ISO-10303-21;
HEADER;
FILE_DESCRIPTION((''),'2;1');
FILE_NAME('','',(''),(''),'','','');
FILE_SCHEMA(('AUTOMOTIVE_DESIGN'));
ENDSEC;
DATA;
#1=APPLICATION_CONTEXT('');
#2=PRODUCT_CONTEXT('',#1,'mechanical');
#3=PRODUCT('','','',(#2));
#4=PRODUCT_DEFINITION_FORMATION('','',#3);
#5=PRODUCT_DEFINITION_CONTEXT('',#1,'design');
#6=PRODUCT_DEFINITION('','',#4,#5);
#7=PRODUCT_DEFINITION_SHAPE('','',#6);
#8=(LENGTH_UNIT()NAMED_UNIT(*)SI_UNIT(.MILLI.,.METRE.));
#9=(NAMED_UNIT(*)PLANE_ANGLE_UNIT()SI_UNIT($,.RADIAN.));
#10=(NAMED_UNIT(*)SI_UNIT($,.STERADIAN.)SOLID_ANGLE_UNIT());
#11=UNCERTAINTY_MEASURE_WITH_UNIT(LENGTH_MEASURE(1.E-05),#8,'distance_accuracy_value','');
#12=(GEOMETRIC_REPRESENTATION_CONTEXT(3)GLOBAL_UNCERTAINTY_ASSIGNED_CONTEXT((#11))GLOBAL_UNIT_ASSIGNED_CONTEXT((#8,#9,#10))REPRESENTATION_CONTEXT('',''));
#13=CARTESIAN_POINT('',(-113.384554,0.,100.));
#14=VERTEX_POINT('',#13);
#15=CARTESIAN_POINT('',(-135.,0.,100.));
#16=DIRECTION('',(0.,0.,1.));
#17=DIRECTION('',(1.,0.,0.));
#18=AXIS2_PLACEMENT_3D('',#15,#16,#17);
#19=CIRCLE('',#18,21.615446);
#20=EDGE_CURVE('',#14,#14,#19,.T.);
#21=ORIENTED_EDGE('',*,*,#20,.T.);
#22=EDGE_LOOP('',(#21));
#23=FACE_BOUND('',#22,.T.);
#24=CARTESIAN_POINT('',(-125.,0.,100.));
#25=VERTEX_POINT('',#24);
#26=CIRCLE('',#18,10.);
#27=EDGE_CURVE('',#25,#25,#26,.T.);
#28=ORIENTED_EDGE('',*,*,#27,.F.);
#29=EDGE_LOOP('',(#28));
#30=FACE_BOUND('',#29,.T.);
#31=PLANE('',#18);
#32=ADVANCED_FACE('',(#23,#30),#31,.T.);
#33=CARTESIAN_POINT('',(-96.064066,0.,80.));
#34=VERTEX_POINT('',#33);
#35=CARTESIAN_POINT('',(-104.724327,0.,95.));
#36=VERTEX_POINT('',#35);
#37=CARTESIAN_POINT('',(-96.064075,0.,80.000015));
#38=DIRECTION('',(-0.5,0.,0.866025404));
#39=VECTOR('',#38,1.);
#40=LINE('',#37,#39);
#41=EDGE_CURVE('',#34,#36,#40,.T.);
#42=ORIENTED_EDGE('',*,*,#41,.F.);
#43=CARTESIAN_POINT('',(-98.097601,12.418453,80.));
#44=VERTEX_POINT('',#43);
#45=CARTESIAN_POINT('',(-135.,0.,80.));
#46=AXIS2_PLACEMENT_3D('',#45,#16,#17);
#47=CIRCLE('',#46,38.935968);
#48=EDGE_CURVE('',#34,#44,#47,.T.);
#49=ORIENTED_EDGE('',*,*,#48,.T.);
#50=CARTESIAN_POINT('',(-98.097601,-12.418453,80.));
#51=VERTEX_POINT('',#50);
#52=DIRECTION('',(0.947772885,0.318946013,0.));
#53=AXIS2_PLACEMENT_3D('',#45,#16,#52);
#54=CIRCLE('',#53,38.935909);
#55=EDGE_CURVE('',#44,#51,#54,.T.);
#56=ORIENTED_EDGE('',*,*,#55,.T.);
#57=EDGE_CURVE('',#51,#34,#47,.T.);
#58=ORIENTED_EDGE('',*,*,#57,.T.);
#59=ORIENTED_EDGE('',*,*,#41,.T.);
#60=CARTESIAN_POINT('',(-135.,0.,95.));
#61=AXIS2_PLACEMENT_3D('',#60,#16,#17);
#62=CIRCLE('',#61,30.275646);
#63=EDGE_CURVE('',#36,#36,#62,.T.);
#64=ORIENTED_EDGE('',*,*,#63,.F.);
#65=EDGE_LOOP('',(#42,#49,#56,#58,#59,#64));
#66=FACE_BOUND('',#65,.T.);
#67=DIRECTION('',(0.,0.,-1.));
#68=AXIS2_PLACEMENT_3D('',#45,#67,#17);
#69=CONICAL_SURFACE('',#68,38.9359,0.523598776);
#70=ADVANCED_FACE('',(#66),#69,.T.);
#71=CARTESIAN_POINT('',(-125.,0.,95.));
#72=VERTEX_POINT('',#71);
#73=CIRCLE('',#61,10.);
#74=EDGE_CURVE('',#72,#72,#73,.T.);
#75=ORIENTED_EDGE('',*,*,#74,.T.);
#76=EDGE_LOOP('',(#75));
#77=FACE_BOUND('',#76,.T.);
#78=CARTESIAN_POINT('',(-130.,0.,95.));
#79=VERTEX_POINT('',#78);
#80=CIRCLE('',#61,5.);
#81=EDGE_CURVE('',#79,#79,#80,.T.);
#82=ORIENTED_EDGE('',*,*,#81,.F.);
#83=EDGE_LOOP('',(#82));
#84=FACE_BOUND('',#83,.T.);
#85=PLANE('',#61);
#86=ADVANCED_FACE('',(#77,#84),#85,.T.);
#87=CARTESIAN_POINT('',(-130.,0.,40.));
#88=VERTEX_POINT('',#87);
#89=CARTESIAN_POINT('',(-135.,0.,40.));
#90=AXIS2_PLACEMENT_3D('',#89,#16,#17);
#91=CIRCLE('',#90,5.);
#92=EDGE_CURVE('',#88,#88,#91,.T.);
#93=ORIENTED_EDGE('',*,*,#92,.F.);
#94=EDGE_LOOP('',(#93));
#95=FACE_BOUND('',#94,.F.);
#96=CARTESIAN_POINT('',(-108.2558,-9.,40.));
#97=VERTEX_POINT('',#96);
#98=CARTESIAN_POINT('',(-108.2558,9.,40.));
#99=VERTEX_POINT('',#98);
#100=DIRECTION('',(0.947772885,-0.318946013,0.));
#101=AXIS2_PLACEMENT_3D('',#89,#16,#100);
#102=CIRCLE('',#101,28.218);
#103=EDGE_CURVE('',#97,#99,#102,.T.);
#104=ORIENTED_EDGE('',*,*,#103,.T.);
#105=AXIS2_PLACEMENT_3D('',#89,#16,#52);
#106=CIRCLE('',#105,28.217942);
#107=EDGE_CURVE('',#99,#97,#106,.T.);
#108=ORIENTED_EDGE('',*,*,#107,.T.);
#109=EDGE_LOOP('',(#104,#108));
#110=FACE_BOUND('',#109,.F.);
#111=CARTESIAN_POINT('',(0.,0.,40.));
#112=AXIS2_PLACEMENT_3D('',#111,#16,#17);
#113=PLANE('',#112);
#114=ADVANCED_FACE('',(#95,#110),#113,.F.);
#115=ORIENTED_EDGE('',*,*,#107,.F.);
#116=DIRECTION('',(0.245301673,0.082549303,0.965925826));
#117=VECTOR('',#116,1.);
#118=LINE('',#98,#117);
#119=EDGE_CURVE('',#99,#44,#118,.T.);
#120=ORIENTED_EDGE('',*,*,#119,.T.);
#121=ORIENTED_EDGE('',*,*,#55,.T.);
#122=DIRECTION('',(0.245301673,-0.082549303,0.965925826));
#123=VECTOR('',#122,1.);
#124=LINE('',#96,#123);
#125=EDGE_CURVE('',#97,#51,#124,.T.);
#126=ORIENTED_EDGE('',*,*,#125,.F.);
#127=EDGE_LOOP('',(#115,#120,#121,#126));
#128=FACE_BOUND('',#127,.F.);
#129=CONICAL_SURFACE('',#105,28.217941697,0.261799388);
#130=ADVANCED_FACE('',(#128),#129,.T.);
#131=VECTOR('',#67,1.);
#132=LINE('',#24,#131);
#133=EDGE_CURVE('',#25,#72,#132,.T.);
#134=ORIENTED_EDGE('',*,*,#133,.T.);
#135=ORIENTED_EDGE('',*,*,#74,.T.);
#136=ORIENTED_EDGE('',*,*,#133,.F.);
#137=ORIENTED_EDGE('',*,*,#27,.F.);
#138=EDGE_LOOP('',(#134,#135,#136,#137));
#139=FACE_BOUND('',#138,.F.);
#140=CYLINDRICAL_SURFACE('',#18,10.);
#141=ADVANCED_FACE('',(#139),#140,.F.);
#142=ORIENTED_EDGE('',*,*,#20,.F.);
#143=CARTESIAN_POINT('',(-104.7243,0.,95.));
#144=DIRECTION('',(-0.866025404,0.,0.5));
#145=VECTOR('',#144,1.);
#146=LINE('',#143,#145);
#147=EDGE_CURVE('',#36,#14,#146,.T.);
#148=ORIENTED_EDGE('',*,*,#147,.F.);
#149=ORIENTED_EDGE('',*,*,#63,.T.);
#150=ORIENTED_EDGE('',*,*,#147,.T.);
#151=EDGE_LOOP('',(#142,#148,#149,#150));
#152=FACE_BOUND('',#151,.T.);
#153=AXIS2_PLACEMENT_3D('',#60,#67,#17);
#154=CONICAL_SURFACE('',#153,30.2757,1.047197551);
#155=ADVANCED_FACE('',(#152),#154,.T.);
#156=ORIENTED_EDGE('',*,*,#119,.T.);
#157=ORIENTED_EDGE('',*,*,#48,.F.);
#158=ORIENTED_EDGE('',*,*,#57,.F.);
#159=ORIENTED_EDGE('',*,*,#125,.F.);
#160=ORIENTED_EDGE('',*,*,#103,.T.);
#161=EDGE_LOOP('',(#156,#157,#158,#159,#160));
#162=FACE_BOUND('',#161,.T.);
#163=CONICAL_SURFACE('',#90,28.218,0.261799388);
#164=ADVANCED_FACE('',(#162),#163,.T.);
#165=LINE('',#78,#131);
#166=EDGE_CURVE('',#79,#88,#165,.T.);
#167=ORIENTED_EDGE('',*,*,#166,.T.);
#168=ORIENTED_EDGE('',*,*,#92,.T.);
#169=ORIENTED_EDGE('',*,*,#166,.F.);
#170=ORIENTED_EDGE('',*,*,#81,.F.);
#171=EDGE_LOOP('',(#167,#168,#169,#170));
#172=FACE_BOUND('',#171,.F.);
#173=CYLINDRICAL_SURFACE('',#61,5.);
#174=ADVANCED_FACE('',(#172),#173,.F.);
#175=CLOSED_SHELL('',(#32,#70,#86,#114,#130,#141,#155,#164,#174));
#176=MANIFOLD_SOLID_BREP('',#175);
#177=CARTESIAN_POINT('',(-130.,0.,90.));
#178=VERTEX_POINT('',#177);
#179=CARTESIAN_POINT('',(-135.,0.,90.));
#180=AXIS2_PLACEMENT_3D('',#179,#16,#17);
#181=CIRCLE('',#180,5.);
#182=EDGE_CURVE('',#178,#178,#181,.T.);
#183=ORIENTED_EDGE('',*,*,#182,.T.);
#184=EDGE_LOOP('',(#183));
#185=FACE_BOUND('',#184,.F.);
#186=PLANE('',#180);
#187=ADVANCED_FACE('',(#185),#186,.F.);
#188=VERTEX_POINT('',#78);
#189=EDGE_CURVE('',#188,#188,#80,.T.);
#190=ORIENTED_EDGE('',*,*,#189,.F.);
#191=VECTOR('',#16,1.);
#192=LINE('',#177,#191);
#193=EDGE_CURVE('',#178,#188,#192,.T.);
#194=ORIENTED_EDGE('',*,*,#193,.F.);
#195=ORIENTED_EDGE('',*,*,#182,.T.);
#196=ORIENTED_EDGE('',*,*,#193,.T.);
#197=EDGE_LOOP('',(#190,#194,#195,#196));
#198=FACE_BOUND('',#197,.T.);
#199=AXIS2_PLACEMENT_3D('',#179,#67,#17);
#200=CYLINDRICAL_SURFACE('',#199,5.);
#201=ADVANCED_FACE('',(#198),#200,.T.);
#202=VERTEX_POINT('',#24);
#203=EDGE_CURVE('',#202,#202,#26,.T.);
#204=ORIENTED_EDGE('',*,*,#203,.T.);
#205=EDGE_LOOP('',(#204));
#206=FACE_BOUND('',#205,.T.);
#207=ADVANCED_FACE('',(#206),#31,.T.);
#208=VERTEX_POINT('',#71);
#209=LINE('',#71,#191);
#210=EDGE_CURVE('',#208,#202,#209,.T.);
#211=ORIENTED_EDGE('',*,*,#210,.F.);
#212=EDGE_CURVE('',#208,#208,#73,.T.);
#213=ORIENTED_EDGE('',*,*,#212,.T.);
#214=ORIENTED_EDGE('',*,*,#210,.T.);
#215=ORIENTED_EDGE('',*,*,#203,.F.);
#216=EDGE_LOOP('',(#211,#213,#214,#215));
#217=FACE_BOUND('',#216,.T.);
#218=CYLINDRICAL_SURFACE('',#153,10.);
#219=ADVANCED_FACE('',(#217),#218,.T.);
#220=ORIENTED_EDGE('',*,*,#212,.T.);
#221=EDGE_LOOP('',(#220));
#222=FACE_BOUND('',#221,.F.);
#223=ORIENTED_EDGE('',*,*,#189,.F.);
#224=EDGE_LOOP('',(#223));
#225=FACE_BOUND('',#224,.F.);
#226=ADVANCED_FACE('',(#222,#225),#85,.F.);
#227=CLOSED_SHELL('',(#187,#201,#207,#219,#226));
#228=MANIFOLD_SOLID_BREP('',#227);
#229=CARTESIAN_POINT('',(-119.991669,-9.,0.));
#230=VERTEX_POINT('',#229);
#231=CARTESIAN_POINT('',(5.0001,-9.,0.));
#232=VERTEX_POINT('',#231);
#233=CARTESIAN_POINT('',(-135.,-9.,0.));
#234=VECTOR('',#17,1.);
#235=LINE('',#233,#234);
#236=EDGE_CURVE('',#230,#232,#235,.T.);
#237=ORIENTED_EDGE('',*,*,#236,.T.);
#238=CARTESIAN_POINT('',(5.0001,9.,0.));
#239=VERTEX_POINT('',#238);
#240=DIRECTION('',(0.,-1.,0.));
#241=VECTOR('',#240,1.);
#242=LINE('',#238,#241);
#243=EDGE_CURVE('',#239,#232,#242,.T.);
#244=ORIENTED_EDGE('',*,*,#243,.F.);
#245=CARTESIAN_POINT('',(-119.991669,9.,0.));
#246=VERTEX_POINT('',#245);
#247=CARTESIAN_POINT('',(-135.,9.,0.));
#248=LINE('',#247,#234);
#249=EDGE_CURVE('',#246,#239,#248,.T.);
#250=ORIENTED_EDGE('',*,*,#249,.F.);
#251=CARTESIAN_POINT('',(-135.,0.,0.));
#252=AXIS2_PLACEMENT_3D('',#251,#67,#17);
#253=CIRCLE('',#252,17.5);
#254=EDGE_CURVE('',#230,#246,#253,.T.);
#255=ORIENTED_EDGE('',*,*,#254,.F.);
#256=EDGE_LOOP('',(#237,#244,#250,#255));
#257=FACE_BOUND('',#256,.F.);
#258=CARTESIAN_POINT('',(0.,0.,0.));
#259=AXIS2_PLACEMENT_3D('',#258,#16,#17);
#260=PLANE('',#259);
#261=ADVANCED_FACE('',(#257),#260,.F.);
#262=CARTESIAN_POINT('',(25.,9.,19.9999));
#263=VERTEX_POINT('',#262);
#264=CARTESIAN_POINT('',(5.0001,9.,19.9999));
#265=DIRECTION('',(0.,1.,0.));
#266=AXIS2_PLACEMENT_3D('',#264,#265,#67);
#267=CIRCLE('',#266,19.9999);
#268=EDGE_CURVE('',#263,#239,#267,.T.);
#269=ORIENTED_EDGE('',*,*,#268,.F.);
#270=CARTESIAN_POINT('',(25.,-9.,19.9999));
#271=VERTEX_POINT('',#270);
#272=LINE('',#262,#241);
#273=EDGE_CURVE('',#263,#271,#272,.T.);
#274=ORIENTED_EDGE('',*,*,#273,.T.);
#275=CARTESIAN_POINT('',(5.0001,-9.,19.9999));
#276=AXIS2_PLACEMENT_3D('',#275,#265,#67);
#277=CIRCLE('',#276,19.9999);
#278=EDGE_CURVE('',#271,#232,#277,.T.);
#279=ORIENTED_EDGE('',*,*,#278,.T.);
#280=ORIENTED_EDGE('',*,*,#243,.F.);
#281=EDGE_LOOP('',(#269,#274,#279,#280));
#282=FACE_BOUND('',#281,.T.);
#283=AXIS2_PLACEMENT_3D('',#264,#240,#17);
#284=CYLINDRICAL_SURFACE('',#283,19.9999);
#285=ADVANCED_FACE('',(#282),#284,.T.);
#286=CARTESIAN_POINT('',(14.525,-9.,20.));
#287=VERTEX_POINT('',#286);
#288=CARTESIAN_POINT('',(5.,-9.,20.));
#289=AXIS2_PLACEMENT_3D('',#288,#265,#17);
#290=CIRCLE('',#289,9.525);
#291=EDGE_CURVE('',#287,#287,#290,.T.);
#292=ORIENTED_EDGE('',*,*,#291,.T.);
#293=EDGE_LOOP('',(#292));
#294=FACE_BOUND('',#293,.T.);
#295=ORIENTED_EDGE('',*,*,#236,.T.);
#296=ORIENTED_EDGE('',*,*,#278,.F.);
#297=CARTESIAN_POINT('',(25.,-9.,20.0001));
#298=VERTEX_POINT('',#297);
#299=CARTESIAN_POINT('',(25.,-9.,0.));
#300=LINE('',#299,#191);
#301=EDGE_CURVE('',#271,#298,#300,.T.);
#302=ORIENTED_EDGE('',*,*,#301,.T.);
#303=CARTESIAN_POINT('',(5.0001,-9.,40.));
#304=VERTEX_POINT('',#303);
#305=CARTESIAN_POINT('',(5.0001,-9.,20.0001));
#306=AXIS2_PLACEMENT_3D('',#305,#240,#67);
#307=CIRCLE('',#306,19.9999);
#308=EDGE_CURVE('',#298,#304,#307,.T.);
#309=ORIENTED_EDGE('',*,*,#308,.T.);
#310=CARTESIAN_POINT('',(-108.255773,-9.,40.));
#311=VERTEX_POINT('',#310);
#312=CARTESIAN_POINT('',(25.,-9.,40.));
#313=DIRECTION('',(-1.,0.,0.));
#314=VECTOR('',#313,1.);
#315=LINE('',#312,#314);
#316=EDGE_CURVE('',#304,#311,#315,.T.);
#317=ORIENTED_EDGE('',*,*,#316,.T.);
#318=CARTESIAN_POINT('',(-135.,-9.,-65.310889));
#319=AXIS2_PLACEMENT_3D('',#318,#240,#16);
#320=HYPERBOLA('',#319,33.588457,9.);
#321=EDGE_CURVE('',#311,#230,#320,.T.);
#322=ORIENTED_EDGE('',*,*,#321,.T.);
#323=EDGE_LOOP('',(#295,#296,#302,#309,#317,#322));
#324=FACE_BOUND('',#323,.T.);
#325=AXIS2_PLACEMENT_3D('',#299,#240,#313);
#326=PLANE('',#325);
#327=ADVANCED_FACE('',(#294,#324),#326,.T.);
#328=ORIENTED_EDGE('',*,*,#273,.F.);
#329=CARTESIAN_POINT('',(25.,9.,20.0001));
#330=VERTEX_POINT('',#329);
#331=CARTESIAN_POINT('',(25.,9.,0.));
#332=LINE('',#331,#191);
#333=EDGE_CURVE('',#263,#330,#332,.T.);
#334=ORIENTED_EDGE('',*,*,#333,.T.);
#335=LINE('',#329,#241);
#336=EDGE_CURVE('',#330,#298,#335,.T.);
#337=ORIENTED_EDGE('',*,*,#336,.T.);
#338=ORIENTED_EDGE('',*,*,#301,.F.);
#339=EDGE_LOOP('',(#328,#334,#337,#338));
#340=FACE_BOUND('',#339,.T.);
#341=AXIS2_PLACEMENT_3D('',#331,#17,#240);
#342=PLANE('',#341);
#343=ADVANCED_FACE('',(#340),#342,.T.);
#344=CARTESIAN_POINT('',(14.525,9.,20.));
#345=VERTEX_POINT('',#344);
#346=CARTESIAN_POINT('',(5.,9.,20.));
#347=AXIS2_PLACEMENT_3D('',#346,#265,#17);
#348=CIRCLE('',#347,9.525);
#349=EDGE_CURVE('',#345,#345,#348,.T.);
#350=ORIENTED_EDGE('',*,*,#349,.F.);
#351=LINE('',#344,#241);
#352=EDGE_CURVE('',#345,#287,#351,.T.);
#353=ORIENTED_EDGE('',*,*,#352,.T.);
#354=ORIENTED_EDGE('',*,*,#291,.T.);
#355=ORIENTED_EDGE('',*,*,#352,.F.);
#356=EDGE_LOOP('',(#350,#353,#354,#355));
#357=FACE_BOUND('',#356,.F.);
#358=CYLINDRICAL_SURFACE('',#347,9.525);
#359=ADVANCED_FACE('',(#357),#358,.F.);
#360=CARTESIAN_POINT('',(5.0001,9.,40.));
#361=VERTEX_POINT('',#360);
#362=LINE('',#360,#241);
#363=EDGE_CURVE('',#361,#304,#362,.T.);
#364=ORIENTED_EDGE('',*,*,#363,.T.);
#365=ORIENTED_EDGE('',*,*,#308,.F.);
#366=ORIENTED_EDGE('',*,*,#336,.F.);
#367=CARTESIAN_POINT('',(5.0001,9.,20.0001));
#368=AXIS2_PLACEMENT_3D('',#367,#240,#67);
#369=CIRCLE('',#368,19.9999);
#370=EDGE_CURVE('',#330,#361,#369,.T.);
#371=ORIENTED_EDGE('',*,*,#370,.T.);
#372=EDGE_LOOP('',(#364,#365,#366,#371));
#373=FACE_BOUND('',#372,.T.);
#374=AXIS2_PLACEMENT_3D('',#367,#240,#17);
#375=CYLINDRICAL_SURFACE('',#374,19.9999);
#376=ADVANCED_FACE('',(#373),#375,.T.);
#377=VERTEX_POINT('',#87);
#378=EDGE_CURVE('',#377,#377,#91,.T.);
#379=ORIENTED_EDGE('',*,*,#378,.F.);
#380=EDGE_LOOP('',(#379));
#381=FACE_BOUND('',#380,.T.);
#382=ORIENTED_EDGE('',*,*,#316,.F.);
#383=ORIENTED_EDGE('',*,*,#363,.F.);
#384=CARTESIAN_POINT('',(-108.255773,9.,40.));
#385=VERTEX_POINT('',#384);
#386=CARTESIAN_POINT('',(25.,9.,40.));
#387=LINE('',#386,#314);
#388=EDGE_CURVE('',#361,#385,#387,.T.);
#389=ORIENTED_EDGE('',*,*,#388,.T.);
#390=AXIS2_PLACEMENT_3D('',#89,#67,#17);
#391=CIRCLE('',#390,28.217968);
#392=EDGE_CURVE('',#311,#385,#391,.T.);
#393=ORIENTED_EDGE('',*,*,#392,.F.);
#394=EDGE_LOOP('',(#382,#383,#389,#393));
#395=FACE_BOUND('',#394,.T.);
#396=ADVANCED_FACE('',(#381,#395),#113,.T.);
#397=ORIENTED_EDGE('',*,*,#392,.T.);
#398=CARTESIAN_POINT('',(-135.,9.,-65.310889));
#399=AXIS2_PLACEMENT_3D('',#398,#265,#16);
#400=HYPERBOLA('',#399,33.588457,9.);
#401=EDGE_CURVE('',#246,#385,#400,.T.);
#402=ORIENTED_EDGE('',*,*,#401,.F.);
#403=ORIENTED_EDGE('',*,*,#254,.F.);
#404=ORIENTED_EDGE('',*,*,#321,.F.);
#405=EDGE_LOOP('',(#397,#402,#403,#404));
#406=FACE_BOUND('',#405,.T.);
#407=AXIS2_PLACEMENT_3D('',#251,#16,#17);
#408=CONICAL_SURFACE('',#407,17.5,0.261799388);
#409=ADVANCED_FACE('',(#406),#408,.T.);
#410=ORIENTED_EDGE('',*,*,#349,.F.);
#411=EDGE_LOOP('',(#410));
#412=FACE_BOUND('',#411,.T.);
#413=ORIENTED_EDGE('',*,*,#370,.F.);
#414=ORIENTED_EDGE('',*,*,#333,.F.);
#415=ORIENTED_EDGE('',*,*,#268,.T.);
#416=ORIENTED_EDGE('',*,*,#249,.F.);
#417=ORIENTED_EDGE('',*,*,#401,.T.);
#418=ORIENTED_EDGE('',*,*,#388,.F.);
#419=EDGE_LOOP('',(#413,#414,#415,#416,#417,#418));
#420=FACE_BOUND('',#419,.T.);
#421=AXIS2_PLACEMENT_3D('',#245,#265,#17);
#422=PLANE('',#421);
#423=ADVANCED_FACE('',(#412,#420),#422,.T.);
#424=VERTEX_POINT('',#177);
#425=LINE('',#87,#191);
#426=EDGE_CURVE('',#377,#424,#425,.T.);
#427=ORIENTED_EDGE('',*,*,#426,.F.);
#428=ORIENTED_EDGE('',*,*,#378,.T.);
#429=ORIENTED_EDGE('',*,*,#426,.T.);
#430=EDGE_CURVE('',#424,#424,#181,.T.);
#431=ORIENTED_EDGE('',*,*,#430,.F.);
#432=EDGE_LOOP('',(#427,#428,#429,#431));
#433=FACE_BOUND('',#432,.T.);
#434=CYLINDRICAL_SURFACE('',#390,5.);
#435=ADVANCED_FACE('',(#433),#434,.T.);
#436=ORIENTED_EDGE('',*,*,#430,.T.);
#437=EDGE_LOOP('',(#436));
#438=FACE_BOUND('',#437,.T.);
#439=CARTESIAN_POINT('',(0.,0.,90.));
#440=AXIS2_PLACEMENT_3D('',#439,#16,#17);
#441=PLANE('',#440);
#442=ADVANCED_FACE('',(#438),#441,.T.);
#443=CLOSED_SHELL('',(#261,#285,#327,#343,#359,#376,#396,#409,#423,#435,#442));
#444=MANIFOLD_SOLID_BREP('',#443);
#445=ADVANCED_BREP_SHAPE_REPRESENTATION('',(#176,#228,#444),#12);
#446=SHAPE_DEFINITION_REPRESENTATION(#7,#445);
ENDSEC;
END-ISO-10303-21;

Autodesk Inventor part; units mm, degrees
ref_plane "YZ Plane" through (0, 0, 0) normal (1, 0, 0) x (0, 1, 0)
ref_plane "XZ Plane" through (0, 0, 0) normal (0, 1, 0) x (-1, 0, 0)
ref_plane "XY Plane" through (0, 0, 0) normal (0, 0, 1) x (1, 0, 0)
sketch "Sketch1" plane through (0, 0, 0) normal (0, 0, 1) x (1, 0, 0)
  line L0 (25, -9) -> (-135, -9)
  line L1 (-135, -9) -> (-135, 9)
  line L2 (-135, 9) -> (25, 9)
  line L3 (25, 9) -> (25, -9)
  circle A0 centre (-135, 0) radius 17.5
  point P0 (0, 0)
  dimension "d0" = 160
  dimension "d1" = 18
  dimension "d5" = 35
extrude "Extrusion1" add sketch "Sketch1" along normal blind 40 contours L0 A0 L2 L3 | L0 L1 L2 A0 picked at (-129.1667, 0)
fillet "Fillet1" radius 20 2 edges at (25, 0, 40) (25, 0, 0)
extrude "Extrusion2" add sketch "Sketch1" along normal blind 40 draft 15 contours A0 L2 L1 L0 | L0 L1 L2 A0
sketch "Sketch4" plane through (0, 0, 40) normal (0, 0, 1) x (1, 0, 0)
  line L0 (-108.2558, -9) -> (5, -9) projected
  line L1 (5, 9) -> (5, -9) projected
  line L2 (5, 9) -> (-108.2558, 9) projected
  arc A0 (-108.2558, 9) -> (-108.2558, -9) centre (-135, 0) ccw projected
  circle A1 centre (-135, 0) radius 28.218
  point P0 (0, 0)
extrude "Extrusion3" add sketch "Sketch4" along normal blind 40 draft 15 separate body contours A0 A1
sketch "Sketch5" plane through (-135, 0, 80) normal (0, 0, 1) x (1, 0, 0)
  circle A0 centre (0, 0) radius 38.9359 projected
  point P0 (135, 0)
extrude "Extrusion4" add sketch "Sketch5" along normal blind 15 draft -30 bodies 2
sketch "Sketch6" plane through (-135, 0, 95) normal (0, 0, 1) x (1, 0, 0)
  circle A0 centre (0, 0) radius 30.2757 projected
  point P0 (135, 0)
extrude "Extrusion5" add sketch "Sketch6" along normal blind 5 draft -60 bodies 2
sketch "Sketch9" plane through (5, 9, 20) normal (0, 1, 0) x (1, 0, 0)
  circle A0 centre (0, 0) radius 9.525
  point P0 (-5, 20)
  dimension "d21" = 19.05
extrude "Extrusion8" cut sketch "Sketch9" against normal through all bodies 1
sketch "Sketch11" plane through (0, 0, 40) normal (0, 0, 1) x (1, 0, 0)
  arc A0 (-108.2558, 9) -> (-108.2558, -9) centre (-135, 0) ccw projected
  circle A1 centre (-135, 0) radius 5
  point P0 (0, 0)
  dimension "d27" = 10
extrude "Extrusion10" add sketch "Sketch11" along normal blind 50 bodies 1
sketch "Sketch13" plane through (-135, 0, 95) normal (0, 0, 1) x (1, 0, 0)
  circle A0 centre (0, 0) radius 5 projected
  point P0 (135, 0)
extrude "Extrusion12" cut sketch "Sketch13" against normal through all bodies 2
sketch "Sketch14" plane through (-135, 0, 100) normal (0, 0, 1) x (1, 0, 0)
  circle A0 centre (0, 0) radius 10
  point P0 (135, 0)
  dimension "d34" = 20
extrude "Extrusion13" cut sketch "Sketch14" against normal blind 5 bodies 2
sketch "Sketch15" plane through (-135, 0, 90) normal (0, 0, 1) x (1, 0, 0)
  circle A0 centre (0, 0) radius 5 projected
extrude "Extrusion14" add sketch "Sketch15" along normal blind 5 separate body
sketch "Sketch16" plane through (-135, 0, 95) normal (0, 0, 1) x (1, 0, 0)
  circle A0 centre (0, 0) radius 10 projected
  point P0 (135, 0)
extrude "Extrusion15" add sketch "Sketch16" along normal blind 5 bodies 3
properties part number "handle"
